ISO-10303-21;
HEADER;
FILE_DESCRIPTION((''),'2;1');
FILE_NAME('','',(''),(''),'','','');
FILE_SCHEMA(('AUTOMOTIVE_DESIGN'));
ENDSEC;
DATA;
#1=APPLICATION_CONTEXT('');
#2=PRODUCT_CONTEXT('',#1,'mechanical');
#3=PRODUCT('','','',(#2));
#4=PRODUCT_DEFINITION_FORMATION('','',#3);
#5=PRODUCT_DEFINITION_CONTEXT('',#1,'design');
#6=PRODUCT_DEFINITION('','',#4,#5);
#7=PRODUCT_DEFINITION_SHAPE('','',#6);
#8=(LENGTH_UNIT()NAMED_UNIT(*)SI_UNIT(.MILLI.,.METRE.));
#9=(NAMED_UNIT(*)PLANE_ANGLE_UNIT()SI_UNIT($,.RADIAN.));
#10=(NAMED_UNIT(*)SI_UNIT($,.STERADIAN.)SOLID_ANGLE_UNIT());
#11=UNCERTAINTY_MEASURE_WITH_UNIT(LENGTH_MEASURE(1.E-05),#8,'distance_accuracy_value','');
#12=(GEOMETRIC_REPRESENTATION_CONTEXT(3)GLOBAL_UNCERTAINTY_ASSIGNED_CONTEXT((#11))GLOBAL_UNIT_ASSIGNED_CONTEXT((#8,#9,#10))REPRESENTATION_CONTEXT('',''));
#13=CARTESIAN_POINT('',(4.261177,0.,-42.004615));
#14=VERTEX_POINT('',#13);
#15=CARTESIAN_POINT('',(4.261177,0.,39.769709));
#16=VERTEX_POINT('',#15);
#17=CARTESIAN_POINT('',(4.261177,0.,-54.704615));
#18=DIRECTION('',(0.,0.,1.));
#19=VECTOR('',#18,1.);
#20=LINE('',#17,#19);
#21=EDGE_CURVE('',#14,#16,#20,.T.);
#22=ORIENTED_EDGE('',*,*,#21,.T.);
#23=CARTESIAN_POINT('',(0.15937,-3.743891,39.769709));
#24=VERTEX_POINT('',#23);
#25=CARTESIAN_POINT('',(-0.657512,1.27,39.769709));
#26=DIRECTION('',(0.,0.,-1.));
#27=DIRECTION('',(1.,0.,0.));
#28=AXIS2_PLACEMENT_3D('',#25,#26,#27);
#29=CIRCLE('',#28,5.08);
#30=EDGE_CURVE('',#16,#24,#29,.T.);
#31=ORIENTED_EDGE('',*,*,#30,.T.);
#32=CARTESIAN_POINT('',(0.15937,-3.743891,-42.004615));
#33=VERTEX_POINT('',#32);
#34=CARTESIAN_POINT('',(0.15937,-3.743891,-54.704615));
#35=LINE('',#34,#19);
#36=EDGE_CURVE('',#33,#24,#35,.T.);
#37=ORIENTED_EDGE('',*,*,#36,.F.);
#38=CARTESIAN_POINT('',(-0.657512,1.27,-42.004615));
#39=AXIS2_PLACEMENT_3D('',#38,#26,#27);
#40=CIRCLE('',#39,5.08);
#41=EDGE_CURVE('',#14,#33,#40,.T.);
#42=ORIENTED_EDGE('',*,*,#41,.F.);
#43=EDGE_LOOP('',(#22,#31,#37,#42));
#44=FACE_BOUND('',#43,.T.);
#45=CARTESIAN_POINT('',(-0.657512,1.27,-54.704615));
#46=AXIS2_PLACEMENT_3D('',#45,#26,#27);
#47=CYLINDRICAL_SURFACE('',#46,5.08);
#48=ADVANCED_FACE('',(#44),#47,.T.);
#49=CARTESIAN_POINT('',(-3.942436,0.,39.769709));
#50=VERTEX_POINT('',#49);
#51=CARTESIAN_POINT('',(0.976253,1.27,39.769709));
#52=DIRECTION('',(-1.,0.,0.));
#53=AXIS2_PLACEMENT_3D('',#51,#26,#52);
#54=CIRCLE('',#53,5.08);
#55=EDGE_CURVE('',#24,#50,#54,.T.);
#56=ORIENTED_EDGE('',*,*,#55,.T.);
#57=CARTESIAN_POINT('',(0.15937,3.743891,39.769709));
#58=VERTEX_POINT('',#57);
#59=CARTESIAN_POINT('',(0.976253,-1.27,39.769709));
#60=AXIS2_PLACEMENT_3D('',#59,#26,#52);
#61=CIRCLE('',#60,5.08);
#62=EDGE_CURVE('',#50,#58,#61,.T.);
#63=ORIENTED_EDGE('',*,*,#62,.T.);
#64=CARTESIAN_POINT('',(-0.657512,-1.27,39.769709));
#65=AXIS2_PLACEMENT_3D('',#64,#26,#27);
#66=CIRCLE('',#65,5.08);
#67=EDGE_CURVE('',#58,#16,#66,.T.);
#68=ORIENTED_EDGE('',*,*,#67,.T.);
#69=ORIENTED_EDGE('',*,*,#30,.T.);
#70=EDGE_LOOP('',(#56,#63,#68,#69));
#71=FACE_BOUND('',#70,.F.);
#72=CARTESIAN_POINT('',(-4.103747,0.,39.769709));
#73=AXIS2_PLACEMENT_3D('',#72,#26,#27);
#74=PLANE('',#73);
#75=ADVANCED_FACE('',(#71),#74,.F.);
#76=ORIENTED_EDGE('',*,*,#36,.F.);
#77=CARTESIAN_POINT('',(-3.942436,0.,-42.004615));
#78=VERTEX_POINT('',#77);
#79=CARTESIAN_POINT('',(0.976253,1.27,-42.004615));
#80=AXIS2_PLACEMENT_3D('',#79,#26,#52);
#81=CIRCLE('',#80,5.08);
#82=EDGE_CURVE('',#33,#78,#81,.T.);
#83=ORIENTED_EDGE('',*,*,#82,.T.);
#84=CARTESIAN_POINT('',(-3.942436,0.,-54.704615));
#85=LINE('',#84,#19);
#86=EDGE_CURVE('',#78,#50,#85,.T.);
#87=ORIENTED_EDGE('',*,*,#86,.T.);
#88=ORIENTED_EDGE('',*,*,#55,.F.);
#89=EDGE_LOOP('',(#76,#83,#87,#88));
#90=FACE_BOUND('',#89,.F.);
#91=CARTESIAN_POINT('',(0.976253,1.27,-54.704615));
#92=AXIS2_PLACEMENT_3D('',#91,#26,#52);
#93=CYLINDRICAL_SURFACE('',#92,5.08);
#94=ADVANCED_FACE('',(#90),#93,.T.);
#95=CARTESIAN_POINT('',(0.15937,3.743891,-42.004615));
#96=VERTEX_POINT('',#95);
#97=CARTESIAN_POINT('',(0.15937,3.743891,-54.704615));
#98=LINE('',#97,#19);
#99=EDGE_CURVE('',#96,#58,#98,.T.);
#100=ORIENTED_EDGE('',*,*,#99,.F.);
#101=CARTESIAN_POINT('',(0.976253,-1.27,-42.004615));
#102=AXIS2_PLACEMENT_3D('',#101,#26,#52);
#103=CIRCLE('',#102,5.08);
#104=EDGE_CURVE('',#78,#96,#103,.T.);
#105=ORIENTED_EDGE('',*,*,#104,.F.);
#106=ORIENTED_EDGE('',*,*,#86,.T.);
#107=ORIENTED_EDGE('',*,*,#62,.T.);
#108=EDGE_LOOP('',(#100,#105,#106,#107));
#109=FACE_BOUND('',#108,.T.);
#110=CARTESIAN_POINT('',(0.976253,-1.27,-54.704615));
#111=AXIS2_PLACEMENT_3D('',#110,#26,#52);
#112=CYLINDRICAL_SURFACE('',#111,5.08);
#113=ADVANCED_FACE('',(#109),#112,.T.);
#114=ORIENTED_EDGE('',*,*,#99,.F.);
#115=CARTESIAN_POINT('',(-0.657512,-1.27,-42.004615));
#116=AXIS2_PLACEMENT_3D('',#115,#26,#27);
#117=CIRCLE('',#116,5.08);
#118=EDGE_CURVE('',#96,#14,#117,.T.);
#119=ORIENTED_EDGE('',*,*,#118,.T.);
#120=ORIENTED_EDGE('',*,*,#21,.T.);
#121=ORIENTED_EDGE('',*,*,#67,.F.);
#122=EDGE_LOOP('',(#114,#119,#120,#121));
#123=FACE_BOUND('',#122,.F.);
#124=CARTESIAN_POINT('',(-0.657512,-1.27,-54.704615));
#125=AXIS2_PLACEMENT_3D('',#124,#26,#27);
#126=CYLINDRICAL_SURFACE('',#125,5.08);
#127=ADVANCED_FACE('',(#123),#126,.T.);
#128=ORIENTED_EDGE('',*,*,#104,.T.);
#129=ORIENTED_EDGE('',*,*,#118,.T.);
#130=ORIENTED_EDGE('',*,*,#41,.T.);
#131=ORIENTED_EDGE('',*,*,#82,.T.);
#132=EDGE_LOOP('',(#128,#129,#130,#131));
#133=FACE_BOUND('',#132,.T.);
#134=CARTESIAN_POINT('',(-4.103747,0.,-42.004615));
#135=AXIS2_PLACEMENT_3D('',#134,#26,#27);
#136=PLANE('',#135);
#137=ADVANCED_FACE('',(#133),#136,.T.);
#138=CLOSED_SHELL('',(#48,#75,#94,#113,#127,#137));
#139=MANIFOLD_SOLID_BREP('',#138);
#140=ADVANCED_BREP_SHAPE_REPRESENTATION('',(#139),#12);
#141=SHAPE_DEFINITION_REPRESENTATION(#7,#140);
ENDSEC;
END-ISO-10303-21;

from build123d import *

# Parameters (mm, degrees)
F0_W        = 8.5262348875
F0_H        = 81.7743241787
F1_DEPTH    = 3.81
F2_T1_DEPTH = 107.1743241787


# Not quite as in the source:
# - a fillet or chamfer that OpenCascade refuses, or shapes differently, is made with other operations: its cross-section is extruded or revolved along the edge and cut away or added


with BuildPart() as f1:
    # F0 (on Front) → F1 (new body, symmetric)
    with BuildSketch(Plane.XZ):
        with Locations((0.1593702473, -1.1174529791)):
            Rectangle(F0_W, F0_H)
    extrude(amount=F1_DEPTH, both=True)

    # F2: fillet of radius 5.08 on 4 edges, made by hand

    # F2_s2 → F2_t1 (cut)
    with BuildSketch(Plane.XY.offset(-54.7046150684)):
        with BuildLine():
            ThreePointArc((4.422487691, 1.27), (2.9345901395, -2.3221024484), (-0.657512309, -3.81))
            Line((-0.657512309, -3.81), (4.422487691, -3.81))
            Line((4.422487691, -3.81), (4.422487691, 1.27))
        make_face()
        with BuildLine():
            ThreePointArc((4.422487691, -1.27), (2.9345901395, 2.3221024484), (-0.657512309, 3.81))
            Line((-0.657512309, 3.81), (4.422487691, 3.81))
            Line((4.422487691, 3.81), (4.422487691, -1.27))
        make_face()
        with BuildLine():
            ThreePointArc((-4.1037471965, 1.27), (-2.6158496449, -2.3221024484), (0.9762528035, -3.81))
            Line((0.9762528035, -3.81), (-4.1037471965, -3.81))
            Line((-4.1037471965, -3.81), (-4.1037471965, 1.27))
        make_face()
        with BuildLine():
            ThreePointArc((-4.1037471965, -1.27), (-2.6158496449, 2.3221024484), (0.9762528035, 3.81))
            Line((0.9762528035, 3.81), (-4.1037471965, 3.81))
            Line((-4.1037471965, 3.81), (-4.1037471965, -1.27))
        make_face()
    extrude(amount=F2_T1_DEPTH, mode=Mode.SUBTRACT)


solid = f1.part
